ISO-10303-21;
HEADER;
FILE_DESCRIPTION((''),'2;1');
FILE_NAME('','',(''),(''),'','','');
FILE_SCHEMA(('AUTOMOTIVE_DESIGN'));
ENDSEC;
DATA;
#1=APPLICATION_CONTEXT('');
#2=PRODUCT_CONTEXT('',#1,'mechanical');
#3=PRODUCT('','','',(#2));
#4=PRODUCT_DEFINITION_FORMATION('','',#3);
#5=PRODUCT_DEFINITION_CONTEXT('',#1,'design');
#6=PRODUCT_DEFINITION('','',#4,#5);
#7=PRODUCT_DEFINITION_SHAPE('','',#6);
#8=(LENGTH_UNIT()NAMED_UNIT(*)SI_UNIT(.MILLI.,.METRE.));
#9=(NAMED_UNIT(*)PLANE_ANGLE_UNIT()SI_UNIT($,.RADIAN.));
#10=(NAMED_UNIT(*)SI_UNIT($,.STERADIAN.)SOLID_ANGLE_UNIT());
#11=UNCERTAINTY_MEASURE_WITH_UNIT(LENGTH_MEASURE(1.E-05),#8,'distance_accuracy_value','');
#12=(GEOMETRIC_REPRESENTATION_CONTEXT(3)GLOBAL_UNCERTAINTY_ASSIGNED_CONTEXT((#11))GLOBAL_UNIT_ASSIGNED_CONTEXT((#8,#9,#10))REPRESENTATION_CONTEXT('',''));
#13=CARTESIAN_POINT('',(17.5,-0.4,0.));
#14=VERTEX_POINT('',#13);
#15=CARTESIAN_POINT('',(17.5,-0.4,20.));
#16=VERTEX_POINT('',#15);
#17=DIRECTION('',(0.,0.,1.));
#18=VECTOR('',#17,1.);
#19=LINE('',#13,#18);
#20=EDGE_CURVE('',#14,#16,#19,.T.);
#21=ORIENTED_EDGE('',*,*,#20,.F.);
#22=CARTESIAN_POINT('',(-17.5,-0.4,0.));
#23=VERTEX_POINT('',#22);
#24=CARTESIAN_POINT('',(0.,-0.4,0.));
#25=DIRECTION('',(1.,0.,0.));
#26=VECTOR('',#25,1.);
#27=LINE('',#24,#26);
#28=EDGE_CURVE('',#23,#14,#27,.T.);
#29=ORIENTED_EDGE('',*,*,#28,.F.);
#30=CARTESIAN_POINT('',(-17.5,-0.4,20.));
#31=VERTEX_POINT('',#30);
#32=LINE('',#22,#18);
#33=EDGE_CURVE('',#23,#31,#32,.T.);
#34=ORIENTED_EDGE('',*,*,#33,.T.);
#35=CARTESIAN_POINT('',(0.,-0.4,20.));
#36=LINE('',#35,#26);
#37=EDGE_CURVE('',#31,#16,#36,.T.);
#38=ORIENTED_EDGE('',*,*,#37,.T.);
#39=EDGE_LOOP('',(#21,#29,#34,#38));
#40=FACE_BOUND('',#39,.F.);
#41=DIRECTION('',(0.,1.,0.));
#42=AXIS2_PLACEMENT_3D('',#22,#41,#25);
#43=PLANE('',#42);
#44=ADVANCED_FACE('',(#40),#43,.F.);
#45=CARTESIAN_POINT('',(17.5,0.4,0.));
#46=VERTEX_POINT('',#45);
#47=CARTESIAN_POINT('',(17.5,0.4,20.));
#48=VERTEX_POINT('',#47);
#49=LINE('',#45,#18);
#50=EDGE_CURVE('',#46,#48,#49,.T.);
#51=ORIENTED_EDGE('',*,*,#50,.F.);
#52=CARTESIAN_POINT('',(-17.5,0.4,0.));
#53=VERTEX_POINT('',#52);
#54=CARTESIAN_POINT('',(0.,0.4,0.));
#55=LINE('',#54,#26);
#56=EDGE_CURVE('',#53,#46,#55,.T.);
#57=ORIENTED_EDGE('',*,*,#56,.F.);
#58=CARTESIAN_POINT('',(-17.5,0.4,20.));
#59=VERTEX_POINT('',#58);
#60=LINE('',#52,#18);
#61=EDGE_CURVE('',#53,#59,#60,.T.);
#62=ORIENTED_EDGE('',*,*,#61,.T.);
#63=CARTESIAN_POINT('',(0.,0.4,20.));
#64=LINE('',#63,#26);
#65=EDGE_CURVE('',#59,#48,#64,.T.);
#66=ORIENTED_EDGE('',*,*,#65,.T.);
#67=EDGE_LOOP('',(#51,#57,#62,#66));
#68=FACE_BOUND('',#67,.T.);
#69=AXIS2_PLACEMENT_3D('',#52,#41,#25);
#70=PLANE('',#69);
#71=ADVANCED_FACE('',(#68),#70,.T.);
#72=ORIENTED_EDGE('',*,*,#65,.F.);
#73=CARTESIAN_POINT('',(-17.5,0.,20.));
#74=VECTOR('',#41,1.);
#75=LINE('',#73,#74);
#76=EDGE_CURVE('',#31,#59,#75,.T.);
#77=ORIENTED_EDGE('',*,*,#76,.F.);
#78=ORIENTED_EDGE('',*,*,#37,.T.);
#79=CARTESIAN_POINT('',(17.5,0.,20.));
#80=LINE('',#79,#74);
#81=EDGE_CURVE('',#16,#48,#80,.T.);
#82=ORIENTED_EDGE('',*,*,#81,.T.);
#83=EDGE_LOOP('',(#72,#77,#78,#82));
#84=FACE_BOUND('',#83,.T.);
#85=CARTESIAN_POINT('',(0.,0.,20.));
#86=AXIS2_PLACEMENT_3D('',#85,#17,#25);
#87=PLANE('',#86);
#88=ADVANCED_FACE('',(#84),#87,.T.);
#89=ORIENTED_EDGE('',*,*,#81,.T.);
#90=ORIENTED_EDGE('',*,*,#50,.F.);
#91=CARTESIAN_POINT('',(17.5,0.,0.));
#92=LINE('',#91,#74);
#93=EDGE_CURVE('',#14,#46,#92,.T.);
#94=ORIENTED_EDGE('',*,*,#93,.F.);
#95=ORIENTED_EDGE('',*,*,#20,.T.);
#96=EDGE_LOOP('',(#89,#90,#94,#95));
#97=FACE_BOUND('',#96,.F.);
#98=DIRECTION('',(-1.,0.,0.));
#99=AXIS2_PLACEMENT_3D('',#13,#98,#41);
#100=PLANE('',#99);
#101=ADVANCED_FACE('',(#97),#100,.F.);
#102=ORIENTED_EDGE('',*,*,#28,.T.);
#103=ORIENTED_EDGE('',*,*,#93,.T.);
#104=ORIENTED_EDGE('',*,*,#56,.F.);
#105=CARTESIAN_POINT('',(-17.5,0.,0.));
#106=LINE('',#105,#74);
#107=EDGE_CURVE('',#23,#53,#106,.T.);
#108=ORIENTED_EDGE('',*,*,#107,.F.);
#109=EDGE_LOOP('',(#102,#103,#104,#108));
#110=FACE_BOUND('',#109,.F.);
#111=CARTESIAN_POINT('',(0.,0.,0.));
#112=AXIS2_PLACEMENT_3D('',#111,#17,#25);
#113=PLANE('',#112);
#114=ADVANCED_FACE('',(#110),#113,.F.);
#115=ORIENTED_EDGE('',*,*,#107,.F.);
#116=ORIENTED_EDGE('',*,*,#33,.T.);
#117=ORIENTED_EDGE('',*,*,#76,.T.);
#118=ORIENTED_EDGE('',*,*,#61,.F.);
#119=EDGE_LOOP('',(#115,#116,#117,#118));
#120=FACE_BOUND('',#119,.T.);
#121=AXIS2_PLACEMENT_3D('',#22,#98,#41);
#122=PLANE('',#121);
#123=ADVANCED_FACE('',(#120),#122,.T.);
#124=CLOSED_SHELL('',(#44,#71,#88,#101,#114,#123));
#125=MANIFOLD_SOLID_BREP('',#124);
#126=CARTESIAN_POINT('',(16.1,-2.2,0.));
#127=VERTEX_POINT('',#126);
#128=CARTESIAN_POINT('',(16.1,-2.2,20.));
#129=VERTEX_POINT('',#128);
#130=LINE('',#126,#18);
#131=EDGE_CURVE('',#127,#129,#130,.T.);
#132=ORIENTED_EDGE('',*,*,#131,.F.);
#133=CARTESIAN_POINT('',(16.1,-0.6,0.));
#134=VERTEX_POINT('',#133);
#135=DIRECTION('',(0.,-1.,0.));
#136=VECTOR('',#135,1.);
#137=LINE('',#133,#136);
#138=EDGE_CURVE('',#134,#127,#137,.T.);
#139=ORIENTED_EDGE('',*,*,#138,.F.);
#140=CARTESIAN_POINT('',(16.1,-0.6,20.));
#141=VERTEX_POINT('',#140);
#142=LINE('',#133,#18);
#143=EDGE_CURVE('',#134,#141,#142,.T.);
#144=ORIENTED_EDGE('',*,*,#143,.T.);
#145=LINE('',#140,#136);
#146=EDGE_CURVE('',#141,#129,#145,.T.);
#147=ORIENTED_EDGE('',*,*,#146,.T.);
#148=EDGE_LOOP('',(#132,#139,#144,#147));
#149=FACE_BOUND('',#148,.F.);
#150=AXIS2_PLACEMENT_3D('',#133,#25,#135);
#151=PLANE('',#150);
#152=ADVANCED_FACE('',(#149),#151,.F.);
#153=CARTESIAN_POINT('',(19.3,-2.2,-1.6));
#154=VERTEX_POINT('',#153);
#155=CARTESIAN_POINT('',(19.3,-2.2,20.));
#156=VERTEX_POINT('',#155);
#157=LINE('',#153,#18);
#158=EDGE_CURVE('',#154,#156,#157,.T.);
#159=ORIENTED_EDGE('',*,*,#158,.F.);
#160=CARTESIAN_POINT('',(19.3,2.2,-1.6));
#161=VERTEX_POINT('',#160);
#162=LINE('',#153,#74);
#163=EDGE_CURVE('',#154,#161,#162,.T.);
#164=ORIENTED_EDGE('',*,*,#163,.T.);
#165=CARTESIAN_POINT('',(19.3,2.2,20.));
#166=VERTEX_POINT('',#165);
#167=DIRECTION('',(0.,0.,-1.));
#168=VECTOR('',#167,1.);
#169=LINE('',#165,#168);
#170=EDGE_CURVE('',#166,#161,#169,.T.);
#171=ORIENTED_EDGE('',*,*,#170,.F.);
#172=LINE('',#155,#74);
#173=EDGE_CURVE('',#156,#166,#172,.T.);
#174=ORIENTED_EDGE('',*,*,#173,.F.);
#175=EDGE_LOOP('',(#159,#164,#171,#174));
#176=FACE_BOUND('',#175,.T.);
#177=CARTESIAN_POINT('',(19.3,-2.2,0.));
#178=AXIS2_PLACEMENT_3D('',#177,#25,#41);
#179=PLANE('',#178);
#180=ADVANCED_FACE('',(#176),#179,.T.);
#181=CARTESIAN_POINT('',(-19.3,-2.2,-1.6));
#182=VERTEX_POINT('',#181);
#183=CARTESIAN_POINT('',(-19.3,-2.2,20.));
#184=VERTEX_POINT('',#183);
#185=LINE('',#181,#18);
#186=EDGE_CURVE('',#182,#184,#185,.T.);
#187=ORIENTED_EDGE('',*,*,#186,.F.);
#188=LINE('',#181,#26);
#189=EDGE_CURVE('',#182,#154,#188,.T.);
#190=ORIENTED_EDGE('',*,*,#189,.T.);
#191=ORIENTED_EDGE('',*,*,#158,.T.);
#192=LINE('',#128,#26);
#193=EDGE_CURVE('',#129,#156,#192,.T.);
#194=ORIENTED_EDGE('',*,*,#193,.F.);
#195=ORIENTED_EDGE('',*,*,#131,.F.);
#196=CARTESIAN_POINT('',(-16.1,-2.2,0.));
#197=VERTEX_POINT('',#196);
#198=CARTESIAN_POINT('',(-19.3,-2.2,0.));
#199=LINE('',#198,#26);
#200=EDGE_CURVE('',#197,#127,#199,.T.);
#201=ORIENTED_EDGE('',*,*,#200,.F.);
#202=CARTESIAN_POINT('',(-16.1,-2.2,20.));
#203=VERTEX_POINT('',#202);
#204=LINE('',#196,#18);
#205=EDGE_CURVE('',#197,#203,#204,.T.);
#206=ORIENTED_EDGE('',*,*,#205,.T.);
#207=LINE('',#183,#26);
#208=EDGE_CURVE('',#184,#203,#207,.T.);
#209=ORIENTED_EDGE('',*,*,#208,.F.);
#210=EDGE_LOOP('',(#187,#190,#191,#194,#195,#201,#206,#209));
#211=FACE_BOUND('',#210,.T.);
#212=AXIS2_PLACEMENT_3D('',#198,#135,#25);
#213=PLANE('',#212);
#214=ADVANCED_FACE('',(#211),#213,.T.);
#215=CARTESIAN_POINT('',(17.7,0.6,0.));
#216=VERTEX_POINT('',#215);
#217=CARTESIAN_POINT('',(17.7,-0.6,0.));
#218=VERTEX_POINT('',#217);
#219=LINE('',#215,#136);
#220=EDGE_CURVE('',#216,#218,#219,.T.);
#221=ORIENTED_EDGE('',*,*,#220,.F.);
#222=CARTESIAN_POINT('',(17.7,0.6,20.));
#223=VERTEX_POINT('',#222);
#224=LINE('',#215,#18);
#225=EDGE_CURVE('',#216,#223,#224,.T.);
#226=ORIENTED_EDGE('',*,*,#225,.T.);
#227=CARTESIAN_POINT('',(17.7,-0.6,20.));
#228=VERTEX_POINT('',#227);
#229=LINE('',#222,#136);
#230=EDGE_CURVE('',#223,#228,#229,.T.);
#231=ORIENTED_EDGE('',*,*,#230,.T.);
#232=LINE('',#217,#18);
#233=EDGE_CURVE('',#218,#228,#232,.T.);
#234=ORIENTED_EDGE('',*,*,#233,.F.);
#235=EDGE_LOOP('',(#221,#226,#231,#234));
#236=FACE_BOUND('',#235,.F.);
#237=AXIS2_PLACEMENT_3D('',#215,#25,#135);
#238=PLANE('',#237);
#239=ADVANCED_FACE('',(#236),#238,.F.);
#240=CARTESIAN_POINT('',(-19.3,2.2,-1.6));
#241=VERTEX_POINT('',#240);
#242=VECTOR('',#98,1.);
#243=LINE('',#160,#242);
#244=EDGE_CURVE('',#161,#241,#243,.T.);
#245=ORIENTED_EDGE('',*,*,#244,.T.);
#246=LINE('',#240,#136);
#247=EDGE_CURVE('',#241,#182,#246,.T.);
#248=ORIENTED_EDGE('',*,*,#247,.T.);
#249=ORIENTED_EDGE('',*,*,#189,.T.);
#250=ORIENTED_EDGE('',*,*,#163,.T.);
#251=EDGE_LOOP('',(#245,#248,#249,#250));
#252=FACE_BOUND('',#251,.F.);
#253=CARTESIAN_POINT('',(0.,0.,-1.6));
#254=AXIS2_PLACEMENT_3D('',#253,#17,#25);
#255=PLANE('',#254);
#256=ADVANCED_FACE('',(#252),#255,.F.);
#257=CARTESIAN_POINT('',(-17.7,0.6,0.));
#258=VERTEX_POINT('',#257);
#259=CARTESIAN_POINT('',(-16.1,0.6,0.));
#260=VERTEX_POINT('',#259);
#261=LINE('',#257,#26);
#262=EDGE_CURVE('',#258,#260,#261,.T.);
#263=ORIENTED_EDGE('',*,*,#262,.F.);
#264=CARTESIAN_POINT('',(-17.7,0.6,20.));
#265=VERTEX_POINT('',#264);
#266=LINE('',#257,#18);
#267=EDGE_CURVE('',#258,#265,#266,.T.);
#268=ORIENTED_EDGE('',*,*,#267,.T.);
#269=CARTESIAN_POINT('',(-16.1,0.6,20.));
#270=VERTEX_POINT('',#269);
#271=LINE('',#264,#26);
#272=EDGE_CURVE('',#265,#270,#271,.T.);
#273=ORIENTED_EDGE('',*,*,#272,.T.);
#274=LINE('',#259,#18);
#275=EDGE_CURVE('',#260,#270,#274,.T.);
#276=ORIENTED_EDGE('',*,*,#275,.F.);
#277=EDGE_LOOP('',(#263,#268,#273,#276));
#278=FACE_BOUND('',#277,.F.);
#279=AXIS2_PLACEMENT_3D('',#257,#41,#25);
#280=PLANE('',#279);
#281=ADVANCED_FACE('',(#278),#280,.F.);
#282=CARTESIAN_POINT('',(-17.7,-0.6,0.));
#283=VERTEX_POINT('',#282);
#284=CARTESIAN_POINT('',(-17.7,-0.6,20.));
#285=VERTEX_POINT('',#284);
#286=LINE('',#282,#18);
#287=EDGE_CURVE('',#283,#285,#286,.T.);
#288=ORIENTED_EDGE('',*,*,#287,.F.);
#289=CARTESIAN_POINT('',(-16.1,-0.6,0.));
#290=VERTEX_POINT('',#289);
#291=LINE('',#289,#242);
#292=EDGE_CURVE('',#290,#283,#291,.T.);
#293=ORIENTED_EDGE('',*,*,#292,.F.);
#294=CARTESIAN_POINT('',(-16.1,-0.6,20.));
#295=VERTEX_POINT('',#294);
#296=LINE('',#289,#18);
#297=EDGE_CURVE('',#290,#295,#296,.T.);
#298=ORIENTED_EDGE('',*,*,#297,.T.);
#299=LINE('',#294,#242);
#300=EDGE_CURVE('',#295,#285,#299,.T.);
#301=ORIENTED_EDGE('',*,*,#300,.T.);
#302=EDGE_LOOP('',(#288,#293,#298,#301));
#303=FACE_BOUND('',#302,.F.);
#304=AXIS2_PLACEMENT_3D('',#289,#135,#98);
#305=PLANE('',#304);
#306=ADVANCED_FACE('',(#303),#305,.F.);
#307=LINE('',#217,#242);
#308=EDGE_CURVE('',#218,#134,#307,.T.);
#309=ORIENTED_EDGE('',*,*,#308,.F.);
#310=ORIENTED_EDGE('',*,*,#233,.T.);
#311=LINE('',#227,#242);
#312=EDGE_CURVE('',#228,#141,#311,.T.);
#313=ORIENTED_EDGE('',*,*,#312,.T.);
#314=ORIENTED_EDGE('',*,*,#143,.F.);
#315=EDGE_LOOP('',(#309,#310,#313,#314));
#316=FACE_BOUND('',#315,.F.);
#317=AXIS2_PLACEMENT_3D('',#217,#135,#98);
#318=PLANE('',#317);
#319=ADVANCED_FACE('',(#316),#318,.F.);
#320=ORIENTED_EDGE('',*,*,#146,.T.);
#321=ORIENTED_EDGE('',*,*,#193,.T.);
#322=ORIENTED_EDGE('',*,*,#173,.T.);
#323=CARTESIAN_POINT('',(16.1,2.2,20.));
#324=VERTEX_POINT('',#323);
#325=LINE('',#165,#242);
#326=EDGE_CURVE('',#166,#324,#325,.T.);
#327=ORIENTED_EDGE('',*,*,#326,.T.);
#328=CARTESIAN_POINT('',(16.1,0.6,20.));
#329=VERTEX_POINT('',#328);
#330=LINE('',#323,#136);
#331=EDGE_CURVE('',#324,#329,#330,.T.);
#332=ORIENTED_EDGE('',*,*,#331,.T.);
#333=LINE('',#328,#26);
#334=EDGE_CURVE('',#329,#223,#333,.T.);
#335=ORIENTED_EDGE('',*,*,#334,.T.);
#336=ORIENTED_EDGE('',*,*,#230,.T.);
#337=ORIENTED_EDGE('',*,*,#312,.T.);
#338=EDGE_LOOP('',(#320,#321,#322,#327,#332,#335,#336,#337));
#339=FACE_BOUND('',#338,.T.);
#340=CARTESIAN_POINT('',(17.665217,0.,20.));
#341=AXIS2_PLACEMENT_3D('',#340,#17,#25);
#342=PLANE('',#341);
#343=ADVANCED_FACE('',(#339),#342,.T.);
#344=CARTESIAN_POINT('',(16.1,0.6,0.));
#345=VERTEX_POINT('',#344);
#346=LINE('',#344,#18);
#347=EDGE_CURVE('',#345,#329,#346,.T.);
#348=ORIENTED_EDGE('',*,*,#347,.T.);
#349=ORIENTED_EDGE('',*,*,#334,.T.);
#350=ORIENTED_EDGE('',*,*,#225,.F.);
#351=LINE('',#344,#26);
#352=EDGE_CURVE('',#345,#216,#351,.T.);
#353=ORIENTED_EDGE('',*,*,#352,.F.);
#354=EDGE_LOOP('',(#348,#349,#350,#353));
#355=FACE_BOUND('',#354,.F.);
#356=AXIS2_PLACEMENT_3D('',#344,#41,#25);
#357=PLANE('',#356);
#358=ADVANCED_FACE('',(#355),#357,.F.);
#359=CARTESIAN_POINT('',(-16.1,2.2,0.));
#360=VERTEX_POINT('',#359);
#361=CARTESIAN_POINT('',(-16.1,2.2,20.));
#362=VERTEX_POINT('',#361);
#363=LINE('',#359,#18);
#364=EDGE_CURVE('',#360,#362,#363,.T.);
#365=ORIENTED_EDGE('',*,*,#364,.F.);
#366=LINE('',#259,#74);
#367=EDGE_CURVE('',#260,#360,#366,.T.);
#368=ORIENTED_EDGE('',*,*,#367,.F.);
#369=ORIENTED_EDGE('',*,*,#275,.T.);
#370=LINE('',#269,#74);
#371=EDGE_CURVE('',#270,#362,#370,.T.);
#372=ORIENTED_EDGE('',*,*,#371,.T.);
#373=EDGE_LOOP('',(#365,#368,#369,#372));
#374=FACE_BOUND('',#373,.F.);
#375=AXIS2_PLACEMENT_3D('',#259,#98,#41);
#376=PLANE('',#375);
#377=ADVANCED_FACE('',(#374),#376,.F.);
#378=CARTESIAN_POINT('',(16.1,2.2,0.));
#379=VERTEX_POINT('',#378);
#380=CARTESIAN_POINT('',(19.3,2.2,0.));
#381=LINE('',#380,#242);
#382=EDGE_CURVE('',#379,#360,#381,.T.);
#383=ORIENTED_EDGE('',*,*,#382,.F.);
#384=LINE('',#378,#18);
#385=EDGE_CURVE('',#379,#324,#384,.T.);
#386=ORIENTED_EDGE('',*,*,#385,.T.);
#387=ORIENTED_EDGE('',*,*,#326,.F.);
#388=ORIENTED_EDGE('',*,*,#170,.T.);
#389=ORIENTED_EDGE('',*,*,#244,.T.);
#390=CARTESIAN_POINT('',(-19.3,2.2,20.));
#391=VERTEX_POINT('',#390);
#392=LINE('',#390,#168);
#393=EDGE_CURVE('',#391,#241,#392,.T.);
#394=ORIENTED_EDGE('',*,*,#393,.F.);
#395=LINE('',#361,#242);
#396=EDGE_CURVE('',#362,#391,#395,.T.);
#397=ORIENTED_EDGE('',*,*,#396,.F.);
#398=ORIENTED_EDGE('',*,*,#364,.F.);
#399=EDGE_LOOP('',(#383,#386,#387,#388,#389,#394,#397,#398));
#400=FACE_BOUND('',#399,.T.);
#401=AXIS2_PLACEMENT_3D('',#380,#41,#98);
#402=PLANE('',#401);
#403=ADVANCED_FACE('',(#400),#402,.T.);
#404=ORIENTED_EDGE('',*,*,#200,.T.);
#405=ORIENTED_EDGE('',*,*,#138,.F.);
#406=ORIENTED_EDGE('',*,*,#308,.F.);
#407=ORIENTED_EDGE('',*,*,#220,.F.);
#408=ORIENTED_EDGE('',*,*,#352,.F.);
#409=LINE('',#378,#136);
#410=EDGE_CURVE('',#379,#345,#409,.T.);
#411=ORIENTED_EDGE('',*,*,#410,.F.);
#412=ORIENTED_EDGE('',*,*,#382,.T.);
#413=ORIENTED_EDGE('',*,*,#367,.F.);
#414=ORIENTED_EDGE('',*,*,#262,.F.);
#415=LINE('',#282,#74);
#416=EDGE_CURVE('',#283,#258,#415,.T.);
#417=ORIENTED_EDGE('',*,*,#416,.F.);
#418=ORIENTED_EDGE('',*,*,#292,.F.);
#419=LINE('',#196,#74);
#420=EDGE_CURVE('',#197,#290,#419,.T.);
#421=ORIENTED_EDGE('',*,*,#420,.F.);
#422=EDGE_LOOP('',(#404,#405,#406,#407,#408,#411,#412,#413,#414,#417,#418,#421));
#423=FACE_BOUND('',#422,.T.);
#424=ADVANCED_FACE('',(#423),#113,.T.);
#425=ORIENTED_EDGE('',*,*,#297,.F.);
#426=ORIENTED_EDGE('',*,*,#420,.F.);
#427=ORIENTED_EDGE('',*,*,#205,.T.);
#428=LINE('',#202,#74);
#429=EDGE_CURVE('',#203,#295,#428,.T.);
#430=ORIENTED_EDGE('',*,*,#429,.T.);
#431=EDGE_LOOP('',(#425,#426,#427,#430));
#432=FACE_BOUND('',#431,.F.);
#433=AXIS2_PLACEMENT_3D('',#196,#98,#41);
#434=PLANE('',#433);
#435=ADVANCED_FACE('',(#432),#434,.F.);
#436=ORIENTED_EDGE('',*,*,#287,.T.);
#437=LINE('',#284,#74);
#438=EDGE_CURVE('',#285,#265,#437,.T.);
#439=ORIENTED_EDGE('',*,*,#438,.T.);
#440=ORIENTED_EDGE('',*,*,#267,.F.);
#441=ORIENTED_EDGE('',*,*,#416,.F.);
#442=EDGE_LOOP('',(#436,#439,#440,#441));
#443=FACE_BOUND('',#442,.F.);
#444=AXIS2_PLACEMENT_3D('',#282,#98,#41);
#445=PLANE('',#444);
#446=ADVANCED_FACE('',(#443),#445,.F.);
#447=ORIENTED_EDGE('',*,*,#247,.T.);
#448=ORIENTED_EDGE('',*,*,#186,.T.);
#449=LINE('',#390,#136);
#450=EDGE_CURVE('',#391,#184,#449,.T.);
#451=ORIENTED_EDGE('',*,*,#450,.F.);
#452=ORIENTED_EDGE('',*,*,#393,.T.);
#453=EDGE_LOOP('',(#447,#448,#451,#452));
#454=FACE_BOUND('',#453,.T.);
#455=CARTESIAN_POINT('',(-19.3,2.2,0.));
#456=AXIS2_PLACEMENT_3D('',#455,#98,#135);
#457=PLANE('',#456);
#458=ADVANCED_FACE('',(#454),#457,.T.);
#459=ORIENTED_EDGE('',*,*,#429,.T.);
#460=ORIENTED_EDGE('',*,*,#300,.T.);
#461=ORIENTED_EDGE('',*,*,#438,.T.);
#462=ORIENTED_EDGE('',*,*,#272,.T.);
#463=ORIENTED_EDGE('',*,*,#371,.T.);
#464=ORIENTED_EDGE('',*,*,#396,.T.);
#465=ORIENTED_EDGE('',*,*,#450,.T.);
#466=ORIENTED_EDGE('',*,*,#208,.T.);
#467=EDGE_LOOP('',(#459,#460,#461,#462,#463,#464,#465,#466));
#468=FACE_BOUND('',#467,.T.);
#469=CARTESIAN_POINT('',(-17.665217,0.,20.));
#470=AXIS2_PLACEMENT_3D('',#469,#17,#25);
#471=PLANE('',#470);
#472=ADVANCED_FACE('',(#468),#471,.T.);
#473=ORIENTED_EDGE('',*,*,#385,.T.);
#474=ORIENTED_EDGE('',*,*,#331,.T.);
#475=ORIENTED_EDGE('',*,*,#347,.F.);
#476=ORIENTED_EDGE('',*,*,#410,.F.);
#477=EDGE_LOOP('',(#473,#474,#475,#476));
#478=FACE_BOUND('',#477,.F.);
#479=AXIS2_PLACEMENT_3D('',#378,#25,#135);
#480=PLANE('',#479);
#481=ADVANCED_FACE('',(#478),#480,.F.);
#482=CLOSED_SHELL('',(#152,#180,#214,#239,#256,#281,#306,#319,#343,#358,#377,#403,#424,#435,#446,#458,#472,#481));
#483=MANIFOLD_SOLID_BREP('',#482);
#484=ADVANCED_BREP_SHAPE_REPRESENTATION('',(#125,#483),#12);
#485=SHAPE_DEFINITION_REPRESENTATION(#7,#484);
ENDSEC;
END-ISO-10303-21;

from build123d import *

# Parameters (mm, degrees)
F2_DEPTH = 20
F1_W     = 35
F1_H     = 0.8
F1_W_2   = 32.2
F1_H_2   = 1.6
F3_DEPTH = 1.6
F4_DEPTH = 20


with BuildPart() as f2:
    # F1 (on Top) → F2 (new body)
    with BuildSketch(Plane.XY):
        Polygon((-17.7, -0.6), (-17.7, 0.6), (-16.1, 0.6), (-16.1, 2.2), (-19.3, 2.2), (-19.3, -2.2), (-16.1, -2.2), (-16.1, -0.6), align=None)
    extrude(amount=F2_DEPTH)



with BuildPart() as f2b:
    # F1 (on Top) → F2, piece 2 (new body)
    with BuildSketch(Plane.XY):
        Polygon((16.1, 2.2), (16.1, 0.6), (17.7, 0.6), (17.7, -0.6), (16.1, -0.6), (16.1, -2.2), (19.3, -2.2), (19.3, 2.2), align=None)
    extrude(amount=F2_DEPTH)


with BuildPart() as f2_1:
    add(f2.part)

    add(f2b.part)  # F3 merges F2b
    # F1 (on Top) → F3 (join)
    with BuildSketch(Plane.XY):
        Polygon((-16.1, 0.6), (-17.7, 0.6), (-17.7, -0.6), (-16.1, -0.6), (16.1, -0.6), (17.7, -0.6), (17.7, 0.6), (16.1, 0.6), align=None)
        Rectangle(F1_W, F1_H, mode=Mode.SUBTRACT)
        Rectangle(F1_W, F1_H)
        with Locations((0, 1.4)):
            Rectangle(F1_W_2, F1_H_2)
        with Locations((0, -1.4)):
            Rectangle(F1_W_2, F1_H_2)
        Polygon((-17.7, -0.6), (-17.7, 0.6), (-16.1, 0.6), (-16.1, 2.2), (-19.3, 2.2), (-19.3, -2.2), (-16.1, -2.2), (-16.1, -0.6), align=None)
        Polygon((16.1, 2.2), (16.1, 0.6), (17.7, 0.6), (17.7, -0.6), (16.1, -0.6), (16.1, -2.2), (19.3, -2.2), (19.3, 2.2), align=None)
    extrude(amount=-F3_DEPTH)


with BuildPart() as f4:
    # F1 (on Top) → F4 (new body)
    with BuildSketch(Plane.XY):
        Rectangle(F1_W, F1_H)
    extrude(amount=F4_DEPTH)


solid = Compound([f2_1.part, f4.part])
